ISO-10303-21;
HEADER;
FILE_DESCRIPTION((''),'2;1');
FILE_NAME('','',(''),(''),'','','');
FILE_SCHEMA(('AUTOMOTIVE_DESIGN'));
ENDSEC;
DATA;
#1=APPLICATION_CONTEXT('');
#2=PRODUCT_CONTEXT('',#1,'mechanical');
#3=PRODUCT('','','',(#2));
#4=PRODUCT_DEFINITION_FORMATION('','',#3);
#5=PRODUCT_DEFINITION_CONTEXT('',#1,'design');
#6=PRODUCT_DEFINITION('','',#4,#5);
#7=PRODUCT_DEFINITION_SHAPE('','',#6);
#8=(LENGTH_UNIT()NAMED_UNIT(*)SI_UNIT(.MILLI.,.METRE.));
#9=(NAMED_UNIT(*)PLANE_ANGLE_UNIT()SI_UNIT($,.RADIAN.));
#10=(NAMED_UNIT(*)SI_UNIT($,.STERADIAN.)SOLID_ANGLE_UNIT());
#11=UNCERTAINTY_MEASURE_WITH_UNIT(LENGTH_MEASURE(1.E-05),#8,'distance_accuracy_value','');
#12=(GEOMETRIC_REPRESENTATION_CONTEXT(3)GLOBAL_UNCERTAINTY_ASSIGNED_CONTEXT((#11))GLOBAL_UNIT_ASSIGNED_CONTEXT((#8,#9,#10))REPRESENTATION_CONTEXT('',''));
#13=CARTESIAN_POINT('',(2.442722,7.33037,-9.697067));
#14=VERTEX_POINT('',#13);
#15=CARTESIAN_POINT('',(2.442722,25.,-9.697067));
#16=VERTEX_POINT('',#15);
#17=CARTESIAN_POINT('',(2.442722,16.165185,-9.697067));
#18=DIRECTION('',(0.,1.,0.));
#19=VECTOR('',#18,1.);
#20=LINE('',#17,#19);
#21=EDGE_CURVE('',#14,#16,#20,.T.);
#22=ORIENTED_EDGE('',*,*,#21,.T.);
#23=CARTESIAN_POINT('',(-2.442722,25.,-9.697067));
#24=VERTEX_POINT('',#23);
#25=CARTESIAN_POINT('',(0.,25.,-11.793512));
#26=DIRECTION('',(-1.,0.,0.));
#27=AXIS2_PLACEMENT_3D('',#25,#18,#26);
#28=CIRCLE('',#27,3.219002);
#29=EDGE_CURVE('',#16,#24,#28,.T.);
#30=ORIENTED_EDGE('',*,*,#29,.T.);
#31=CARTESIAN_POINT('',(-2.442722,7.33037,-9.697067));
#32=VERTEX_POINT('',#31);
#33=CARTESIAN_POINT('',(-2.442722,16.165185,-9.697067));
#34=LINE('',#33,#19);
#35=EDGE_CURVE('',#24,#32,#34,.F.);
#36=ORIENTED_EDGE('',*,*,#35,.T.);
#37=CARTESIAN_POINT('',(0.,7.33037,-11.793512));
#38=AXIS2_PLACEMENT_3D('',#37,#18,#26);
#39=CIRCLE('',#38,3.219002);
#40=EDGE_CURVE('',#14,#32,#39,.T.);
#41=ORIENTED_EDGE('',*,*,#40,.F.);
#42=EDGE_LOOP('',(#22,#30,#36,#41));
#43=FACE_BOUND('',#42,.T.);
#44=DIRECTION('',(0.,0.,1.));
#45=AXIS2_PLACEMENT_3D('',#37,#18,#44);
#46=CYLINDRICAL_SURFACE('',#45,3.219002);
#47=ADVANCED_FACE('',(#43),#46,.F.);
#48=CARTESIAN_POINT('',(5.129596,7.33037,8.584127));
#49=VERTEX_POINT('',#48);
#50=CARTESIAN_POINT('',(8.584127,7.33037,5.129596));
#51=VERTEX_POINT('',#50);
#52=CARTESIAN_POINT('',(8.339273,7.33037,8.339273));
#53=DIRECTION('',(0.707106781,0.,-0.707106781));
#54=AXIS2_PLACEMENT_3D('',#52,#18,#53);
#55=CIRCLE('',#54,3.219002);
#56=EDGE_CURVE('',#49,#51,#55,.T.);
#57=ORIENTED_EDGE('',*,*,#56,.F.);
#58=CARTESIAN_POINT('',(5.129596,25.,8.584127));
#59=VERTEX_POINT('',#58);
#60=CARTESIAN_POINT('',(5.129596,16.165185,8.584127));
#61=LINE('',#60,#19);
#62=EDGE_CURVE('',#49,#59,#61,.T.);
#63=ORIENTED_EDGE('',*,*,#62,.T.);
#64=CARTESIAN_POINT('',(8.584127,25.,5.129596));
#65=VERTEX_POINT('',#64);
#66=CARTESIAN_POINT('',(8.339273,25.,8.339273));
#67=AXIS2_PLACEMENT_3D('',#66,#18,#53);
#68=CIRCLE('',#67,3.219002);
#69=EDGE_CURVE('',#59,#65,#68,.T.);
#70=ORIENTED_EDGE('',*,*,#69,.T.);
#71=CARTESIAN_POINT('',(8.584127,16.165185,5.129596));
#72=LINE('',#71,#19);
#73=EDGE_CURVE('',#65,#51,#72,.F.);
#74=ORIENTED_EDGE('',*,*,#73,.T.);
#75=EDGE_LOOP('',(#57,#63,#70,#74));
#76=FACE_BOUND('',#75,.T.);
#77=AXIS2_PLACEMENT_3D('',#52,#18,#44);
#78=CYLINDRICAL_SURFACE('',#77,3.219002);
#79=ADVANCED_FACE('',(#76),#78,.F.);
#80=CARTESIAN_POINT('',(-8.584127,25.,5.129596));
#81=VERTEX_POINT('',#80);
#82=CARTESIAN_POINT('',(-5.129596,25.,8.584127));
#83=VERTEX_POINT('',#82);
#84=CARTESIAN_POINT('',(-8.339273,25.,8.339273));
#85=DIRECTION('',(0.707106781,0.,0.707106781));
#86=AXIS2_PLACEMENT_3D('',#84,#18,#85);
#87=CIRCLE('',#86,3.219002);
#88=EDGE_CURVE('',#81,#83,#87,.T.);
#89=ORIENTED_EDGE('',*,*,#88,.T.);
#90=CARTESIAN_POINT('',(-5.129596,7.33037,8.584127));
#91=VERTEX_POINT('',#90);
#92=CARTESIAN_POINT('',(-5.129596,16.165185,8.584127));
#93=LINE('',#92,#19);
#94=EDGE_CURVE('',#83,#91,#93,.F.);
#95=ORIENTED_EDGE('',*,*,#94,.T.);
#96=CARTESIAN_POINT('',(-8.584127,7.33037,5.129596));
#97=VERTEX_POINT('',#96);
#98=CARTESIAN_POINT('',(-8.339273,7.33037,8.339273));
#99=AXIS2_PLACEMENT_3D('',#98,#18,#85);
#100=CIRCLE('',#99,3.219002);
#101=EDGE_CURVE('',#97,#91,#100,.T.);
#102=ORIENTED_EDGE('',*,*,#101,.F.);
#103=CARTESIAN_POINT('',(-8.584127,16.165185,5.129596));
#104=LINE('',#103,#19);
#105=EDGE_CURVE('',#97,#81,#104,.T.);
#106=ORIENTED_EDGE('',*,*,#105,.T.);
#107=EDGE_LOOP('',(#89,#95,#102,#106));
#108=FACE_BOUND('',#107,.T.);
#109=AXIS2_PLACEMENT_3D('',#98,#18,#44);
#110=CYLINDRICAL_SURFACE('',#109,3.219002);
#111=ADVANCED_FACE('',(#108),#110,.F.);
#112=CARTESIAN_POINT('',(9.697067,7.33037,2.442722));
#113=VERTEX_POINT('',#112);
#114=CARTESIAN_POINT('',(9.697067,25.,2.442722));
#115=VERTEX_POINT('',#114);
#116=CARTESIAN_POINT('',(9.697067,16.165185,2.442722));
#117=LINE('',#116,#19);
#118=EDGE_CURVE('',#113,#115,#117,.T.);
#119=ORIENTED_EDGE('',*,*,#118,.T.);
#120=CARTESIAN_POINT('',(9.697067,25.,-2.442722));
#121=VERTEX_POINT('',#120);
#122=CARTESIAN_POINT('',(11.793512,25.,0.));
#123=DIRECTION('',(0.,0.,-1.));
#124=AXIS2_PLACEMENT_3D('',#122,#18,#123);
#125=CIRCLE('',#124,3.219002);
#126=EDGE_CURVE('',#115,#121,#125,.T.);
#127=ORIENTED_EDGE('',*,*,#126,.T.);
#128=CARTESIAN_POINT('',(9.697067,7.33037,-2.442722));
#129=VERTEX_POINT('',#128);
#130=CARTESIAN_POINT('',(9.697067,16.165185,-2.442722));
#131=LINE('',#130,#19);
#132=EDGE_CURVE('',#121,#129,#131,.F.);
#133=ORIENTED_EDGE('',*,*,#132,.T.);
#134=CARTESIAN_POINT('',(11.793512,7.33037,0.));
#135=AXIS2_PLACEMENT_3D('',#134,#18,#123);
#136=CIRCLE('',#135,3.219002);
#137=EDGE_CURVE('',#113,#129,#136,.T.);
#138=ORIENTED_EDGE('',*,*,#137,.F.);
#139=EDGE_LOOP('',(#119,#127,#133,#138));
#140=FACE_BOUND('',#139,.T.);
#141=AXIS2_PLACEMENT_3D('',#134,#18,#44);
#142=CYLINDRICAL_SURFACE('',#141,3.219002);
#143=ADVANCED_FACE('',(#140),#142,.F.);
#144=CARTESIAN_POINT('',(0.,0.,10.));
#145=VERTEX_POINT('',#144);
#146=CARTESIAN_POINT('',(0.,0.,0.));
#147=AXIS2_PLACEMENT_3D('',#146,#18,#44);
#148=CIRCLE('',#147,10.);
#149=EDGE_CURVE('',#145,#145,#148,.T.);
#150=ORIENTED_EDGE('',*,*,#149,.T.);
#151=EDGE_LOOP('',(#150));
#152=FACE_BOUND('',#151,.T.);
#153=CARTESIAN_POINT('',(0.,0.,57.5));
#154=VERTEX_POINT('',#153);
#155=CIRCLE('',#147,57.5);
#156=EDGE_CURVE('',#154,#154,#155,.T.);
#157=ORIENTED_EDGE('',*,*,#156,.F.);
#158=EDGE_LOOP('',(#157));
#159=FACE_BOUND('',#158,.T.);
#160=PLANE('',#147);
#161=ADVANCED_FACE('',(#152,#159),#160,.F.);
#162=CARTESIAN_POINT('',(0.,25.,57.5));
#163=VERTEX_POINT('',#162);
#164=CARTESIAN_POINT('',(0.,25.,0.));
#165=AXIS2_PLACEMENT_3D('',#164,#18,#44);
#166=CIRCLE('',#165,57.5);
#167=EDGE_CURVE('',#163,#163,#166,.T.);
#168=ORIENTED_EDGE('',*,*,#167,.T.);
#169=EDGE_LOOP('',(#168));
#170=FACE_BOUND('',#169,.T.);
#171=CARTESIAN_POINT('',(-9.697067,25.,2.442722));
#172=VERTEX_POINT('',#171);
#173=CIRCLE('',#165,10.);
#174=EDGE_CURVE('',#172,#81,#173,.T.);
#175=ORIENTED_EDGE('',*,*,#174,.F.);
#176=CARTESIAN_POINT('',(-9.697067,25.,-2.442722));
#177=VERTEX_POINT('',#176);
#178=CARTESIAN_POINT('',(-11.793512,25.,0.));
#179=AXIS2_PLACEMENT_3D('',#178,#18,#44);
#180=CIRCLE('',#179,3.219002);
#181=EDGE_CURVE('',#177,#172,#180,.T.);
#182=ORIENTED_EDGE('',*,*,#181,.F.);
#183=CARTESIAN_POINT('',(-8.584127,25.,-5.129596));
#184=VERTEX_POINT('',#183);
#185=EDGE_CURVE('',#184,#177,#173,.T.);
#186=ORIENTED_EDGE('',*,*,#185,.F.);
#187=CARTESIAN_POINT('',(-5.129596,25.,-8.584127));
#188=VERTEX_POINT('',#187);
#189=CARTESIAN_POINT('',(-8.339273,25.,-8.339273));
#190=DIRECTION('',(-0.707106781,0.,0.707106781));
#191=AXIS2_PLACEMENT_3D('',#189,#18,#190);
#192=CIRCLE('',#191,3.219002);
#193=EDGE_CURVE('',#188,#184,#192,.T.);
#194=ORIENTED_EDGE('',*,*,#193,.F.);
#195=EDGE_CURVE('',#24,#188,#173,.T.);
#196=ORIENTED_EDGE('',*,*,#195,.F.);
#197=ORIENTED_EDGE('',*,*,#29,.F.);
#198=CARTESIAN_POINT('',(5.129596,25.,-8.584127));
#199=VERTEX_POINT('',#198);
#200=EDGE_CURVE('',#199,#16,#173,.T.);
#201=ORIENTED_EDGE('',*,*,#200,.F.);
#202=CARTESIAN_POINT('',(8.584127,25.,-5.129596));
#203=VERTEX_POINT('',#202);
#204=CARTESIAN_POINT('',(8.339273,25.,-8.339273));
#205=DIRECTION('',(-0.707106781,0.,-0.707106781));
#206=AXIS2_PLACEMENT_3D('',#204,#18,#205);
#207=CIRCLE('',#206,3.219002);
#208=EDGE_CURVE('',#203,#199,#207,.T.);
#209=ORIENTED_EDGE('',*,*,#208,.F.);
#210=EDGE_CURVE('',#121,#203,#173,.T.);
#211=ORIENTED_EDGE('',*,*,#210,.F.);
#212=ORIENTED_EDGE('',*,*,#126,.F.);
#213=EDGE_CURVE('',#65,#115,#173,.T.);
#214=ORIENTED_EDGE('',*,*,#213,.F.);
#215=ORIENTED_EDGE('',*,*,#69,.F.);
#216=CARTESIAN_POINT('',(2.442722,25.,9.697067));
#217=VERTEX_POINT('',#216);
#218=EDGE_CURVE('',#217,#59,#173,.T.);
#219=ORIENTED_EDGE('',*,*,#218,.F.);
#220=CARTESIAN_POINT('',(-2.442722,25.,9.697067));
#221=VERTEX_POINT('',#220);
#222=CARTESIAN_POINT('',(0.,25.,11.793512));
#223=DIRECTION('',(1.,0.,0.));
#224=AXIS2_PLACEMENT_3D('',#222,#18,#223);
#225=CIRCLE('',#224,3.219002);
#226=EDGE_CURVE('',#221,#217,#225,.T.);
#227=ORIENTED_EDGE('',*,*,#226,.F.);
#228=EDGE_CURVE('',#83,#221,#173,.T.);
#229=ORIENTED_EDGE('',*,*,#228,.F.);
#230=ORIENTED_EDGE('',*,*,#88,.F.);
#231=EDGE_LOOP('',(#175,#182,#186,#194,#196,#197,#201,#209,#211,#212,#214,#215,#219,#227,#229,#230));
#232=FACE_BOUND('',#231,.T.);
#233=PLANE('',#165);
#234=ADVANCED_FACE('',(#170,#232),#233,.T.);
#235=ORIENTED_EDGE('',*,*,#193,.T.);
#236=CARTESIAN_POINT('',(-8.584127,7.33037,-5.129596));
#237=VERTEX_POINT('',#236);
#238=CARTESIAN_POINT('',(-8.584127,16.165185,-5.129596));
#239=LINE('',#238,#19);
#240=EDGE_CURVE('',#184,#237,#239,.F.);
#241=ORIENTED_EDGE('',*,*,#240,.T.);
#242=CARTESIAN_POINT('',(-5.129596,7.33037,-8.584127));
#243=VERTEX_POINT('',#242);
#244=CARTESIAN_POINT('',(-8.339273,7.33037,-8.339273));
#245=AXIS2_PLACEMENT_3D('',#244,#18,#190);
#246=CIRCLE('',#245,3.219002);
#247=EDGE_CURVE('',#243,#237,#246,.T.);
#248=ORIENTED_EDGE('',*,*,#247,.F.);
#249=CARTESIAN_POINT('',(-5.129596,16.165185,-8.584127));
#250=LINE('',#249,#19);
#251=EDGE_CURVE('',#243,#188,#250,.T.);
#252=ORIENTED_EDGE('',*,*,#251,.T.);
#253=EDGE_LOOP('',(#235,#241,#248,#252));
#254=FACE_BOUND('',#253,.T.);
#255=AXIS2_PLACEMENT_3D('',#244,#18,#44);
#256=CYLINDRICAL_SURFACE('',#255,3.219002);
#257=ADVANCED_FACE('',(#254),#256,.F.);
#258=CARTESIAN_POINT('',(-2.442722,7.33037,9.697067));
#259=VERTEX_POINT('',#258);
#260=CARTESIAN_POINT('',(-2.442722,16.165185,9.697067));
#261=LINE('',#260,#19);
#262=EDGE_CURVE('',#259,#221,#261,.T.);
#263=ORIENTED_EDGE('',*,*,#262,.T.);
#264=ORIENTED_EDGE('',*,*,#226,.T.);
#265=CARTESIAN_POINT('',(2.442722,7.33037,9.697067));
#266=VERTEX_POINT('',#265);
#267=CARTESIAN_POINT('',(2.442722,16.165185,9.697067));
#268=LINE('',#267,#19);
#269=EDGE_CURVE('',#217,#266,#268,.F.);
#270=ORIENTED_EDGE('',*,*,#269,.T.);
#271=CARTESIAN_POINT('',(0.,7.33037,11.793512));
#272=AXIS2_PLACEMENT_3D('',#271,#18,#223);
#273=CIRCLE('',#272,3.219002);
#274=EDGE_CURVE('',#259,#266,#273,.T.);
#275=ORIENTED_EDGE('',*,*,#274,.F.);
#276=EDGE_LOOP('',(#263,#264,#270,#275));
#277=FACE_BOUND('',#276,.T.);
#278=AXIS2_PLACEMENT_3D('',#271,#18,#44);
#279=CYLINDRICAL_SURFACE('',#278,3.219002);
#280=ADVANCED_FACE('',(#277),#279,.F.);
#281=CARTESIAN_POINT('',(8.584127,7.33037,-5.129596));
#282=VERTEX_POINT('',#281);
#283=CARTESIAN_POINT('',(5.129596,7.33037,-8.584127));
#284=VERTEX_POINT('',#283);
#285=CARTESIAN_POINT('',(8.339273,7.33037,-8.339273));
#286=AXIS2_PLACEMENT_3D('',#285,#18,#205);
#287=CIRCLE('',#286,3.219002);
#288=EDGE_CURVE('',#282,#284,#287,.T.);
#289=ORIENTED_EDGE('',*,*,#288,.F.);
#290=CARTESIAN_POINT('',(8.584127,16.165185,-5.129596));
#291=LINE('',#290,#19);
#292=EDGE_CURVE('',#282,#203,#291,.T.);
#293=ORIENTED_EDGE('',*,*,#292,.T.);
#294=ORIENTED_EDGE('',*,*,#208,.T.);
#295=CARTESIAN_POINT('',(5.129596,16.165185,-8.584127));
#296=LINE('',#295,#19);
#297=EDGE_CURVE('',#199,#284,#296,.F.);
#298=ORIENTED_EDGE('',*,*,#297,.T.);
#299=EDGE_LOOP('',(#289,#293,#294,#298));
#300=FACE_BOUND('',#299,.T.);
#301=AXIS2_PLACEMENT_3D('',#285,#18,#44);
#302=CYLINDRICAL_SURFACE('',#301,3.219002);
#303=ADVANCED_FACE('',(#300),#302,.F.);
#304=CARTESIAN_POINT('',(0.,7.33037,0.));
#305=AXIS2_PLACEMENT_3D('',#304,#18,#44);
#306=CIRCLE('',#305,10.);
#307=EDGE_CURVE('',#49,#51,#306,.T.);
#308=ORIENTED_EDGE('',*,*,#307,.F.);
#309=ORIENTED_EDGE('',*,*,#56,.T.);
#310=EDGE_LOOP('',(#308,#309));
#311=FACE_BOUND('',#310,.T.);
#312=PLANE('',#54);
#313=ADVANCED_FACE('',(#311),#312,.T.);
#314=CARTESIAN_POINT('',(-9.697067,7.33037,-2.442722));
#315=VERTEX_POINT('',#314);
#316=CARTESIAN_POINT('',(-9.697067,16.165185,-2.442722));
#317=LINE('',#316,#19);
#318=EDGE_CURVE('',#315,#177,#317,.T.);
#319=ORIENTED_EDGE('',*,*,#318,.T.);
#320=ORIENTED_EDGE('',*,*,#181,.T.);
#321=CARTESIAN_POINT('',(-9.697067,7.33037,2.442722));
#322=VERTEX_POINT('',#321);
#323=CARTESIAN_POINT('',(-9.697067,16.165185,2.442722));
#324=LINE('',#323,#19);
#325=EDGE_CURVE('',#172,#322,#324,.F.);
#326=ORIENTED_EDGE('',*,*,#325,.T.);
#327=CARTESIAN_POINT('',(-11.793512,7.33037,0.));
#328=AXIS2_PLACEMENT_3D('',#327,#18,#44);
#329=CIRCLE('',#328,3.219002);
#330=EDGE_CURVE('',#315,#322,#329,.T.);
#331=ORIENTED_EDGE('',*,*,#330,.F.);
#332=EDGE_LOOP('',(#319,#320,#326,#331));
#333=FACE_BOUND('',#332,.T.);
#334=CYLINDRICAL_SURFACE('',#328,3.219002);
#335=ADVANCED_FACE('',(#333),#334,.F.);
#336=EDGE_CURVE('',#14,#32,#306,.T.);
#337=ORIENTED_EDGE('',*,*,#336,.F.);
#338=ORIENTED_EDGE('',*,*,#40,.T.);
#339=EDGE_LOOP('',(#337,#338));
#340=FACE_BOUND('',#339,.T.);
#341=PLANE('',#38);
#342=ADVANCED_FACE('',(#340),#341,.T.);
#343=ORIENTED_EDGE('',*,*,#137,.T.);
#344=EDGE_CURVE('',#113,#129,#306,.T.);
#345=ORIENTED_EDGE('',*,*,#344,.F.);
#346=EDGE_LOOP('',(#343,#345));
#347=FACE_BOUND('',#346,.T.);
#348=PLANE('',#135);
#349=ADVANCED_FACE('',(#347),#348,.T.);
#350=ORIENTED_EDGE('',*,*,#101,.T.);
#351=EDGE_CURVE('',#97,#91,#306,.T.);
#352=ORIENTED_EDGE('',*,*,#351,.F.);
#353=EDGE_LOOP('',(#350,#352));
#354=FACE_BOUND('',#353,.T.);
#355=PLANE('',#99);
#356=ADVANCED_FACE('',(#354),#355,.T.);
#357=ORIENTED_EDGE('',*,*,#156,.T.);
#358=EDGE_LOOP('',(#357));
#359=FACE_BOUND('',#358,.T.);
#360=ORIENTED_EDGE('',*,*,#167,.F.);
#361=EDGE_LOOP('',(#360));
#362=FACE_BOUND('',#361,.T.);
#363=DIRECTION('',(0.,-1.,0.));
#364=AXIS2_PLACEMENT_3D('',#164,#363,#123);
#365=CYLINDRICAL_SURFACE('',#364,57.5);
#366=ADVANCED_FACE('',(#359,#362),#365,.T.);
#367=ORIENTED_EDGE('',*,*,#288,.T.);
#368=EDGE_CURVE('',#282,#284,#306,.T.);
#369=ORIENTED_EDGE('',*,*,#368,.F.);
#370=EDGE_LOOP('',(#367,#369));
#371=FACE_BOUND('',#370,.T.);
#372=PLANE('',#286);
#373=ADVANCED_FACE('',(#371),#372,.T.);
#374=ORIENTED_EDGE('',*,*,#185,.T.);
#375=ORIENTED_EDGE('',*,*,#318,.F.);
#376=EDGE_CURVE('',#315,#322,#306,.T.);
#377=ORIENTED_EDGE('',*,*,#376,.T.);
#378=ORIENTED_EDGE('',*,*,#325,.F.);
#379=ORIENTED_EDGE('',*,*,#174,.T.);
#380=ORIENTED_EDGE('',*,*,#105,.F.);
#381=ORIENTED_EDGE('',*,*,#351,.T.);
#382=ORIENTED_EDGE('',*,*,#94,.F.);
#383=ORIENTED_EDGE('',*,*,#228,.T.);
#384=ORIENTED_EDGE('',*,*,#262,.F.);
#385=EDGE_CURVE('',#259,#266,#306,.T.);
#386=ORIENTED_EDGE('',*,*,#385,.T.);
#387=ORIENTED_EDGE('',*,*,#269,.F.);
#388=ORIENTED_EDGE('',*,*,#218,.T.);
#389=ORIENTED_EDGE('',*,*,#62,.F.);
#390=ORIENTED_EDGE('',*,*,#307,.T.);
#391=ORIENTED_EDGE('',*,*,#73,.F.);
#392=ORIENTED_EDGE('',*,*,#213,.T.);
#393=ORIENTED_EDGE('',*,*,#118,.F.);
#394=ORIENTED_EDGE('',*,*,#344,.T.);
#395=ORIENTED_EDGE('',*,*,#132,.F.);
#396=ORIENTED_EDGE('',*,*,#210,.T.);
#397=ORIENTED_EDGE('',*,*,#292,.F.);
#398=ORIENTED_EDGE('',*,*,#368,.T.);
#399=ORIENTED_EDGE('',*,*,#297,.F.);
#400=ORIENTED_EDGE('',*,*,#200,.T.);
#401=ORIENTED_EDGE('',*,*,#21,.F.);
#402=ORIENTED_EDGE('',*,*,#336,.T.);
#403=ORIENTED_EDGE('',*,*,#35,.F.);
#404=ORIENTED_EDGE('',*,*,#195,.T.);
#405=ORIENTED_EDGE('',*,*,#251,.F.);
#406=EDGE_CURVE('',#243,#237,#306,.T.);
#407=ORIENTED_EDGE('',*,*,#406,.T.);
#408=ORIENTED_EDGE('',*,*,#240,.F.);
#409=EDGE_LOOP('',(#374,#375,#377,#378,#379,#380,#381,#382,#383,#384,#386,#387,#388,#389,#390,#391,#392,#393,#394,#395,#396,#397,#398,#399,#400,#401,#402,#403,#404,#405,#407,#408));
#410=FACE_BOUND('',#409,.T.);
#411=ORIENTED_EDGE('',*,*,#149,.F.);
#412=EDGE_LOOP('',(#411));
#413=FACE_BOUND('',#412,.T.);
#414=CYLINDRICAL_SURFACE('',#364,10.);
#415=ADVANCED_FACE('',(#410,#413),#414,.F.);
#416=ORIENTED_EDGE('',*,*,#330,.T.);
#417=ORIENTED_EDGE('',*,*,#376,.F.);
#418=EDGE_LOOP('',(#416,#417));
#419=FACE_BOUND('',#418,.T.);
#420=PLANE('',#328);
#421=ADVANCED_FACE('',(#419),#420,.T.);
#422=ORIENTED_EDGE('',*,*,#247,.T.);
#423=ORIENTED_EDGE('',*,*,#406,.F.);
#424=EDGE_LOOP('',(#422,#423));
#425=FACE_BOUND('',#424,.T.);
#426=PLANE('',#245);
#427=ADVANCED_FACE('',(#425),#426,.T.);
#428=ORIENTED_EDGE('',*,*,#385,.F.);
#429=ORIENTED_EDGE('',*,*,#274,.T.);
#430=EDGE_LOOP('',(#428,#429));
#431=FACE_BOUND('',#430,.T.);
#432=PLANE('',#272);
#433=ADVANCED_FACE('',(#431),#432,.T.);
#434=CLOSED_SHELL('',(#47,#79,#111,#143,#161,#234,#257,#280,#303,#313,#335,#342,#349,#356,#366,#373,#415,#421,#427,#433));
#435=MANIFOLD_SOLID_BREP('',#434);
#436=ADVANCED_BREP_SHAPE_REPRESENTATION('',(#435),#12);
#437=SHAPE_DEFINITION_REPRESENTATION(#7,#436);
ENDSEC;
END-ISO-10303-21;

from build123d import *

# Parameters (mm, degrees)
SKETCH1_R           = 57.5
BOSS_EXTRUDE1_DEPTH = 25
SKETCH2_R           = 10
CUT_EXTRUDE1_DEPTH  = 86.073497636
SKETCH3_R           = 3.219002266
CUT_EXTRUDE2_DEPTH  = 17.669629676
CIRPATTERN1_COUNT   = 8


with BuildPart() as part:
    # Sketch1 → Boss-Extrude1 (new body)
    with BuildSketch(Plane(origin=(0, 0, 0), x_dir=(1, 0, 0), z_dir=(0, 1, 0))):
        Circle(SKETCH1_R)
    extrude(amount=BOSS_EXTRUDE1_DEPTH)

    # Sketch2 → Cut-Extrude1 (cut, through all)
    with BuildSketch(Plane(origin=(0, 0, 0), x_dir=(1, 0, 0), z_dir=(0, 1, 0))):
        Circle(SKETCH2_R)
    extrude(amount=CUT_EXTRUDE1_DEPTH, mode=Mode.SUBTRACT)

    # Sketch3 → Cut-Extrude2 (cut)
    with BuildSketch(Plane(origin=(0, 25, 0), x_dir=(1, 0, 0), z_dir=(0, 1, 0))):
        with Locations((-11.793512299, 0)):
            Circle(SKETCH3_R)
    cut_extrude2 = extrude(amount=-CUT_EXTRUDE2_DEPTH, mode=Mode.SUBTRACT)

    # CirPattern1: Cut-Extrude2 ×8 about axis
    cirpattern1_axis = Axis((0, 0, 0), (0, 1, 0))
    for i in range(1, CIRPATTERN1_COUNT):
        add(cut_extrude2.rotate(cirpattern1_axis, i * 360 / CIRPATTERN1_COUNT), mode=Mode.SUBTRACT)


solid = part.part
